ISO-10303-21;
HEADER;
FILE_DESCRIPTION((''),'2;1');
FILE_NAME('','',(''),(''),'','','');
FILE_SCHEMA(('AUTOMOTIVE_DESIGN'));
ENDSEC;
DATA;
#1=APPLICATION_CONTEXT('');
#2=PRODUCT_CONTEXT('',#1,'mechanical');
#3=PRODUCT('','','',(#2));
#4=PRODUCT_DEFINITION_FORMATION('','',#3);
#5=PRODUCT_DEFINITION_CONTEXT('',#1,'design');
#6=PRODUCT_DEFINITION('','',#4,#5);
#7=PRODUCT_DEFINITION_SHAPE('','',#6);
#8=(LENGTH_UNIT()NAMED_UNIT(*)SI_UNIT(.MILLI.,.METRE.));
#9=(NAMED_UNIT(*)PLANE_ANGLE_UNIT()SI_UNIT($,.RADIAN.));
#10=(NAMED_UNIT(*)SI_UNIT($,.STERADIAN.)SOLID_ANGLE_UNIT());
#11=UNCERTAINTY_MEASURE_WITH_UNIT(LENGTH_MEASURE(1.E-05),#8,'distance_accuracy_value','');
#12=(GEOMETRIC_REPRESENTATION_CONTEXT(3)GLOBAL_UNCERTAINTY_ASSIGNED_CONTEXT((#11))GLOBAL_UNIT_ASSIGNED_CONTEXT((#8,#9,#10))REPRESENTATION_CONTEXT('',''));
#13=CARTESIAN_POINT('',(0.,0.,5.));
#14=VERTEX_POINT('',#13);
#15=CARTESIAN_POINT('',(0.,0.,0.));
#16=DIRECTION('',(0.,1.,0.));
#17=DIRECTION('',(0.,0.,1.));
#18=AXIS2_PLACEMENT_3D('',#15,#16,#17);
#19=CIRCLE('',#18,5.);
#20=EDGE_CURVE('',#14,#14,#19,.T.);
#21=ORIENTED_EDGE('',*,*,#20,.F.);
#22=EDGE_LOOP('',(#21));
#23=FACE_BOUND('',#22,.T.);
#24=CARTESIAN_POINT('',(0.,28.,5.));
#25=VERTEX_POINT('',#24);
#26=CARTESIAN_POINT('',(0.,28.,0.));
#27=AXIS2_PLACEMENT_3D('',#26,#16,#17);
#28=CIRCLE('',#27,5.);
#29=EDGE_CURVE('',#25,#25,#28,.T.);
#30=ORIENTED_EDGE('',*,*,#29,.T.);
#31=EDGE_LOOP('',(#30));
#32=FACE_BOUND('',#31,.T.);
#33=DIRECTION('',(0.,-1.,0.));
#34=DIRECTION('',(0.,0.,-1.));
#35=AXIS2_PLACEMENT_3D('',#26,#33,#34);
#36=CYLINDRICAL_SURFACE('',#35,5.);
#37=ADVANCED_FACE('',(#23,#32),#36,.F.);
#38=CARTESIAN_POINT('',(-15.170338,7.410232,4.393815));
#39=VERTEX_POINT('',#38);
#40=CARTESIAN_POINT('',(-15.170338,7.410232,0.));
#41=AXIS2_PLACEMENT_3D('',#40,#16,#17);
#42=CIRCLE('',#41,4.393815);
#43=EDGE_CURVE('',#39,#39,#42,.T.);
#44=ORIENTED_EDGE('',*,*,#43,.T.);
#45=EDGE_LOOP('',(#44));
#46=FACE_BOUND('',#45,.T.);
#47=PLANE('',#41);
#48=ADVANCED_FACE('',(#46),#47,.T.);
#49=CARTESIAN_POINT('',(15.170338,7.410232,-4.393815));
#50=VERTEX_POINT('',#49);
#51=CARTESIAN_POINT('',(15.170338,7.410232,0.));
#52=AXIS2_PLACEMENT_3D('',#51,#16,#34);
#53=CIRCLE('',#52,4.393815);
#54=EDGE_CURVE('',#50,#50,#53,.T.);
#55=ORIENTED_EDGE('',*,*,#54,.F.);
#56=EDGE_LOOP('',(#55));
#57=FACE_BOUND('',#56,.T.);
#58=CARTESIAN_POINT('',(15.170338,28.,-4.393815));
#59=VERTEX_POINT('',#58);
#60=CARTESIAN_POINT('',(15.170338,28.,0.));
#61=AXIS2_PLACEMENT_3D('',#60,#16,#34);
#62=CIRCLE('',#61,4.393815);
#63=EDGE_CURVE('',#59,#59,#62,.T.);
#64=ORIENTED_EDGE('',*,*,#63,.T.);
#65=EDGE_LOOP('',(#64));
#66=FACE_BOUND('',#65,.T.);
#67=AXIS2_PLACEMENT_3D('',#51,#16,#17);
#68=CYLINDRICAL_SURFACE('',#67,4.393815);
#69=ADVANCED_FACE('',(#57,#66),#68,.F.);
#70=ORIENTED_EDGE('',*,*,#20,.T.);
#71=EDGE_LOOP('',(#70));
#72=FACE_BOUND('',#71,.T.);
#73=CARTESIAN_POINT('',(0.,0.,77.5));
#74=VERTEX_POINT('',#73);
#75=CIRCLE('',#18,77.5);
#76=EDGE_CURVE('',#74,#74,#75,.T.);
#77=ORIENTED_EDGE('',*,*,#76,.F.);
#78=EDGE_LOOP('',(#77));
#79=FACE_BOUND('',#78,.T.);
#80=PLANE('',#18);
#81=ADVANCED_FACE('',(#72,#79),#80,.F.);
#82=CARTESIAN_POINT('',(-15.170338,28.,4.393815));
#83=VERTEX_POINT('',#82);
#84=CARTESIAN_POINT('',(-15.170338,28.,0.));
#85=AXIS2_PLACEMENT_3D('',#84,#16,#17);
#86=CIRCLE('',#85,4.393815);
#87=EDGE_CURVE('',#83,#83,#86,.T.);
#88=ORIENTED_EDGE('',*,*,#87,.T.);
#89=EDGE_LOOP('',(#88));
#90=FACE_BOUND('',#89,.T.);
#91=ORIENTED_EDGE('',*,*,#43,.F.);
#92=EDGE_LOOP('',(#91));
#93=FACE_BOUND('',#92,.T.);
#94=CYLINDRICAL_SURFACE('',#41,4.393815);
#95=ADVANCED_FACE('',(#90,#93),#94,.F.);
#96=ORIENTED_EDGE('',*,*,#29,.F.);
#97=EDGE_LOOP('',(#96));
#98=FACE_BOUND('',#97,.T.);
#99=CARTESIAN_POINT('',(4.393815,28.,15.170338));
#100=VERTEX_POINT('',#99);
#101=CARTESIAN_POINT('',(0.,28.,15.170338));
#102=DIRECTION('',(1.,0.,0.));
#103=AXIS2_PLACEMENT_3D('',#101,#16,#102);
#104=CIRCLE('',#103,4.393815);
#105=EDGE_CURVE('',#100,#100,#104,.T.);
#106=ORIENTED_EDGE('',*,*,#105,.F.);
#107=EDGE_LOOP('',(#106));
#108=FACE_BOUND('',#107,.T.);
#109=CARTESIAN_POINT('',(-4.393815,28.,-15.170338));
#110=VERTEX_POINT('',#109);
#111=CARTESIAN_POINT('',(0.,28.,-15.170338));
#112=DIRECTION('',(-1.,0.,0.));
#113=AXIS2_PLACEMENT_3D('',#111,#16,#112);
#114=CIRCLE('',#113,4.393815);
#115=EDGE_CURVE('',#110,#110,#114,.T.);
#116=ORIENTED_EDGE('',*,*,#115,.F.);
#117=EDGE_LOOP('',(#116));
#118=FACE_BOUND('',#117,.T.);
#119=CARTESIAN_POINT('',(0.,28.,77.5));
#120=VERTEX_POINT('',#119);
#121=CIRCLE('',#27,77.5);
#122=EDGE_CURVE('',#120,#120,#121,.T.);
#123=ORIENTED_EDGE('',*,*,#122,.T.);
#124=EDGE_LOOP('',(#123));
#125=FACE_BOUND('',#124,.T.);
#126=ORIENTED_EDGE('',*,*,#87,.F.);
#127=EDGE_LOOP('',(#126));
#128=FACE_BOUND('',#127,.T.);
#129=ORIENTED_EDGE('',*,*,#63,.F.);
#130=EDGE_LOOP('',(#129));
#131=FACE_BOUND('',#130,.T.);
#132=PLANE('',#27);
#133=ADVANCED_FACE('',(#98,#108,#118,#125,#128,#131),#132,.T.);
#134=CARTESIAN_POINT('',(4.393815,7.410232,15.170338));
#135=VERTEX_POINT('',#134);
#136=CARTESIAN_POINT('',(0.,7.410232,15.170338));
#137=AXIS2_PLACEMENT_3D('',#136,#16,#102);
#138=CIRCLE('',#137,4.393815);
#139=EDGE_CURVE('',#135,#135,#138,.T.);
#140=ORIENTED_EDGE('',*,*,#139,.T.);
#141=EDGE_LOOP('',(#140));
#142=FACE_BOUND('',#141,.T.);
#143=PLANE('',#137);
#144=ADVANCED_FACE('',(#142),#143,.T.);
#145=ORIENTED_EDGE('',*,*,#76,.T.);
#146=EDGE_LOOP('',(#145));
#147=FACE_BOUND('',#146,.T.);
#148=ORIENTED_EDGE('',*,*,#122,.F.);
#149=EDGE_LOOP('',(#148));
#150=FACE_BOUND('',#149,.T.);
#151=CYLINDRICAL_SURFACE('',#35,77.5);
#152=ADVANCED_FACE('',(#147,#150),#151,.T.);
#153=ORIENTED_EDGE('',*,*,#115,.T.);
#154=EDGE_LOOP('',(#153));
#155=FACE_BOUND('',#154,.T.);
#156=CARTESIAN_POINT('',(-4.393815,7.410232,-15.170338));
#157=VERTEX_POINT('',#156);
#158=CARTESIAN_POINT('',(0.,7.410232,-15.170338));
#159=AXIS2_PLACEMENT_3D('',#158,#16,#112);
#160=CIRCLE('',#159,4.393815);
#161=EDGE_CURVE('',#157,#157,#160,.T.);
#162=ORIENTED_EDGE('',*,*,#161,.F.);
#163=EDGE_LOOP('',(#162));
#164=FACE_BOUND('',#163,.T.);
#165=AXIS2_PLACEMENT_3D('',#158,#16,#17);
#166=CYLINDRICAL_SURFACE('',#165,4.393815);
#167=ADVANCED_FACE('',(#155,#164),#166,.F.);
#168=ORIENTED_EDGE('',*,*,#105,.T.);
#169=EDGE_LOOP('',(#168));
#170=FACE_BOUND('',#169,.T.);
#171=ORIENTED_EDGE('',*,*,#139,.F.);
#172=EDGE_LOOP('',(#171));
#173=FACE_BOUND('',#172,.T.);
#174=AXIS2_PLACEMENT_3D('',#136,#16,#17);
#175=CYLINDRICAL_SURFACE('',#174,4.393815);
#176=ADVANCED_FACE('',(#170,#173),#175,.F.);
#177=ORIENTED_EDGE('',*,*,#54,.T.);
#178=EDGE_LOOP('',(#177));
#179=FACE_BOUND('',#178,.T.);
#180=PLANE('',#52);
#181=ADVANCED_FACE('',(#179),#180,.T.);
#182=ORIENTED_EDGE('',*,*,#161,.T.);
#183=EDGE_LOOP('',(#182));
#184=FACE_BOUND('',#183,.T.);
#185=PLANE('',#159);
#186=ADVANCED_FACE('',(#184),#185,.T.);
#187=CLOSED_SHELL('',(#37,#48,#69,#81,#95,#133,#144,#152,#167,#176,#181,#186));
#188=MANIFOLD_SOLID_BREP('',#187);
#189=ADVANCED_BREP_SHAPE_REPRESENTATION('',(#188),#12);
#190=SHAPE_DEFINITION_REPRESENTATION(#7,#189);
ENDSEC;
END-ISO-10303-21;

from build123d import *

# Parameters (mm, degrees)
SKETCH1_R           = 77.5
BOSS_EXTRUDE1_DEPTH = 28
SKETCH2_R           = 5
CUT_EXTRUDE1_DEPTH  = 114.121615971
SKETCH3_R           = 4.393814525
CUT_EXTRUDE2_DEPTH  = 20.589767576
CIRPATTERN1_COUNT   = 4


with BuildPart() as part:
    # Sketch1 → Boss-Extrude1 (new body)
    with BuildSketch(Plane(origin=(0, 0, 0), x_dir=(1, 0, 0), z_dir=(0, 1, 0))):
        Circle(SKETCH1_R)
    extrude(amount=BOSS_EXTRUDE1_DEPTH)

    # Sketch2 → Cut-Extrude1 (cut, through all)
    with BuildSketch(Plane(origin=(0, 0, 0), x_dir=(1, 0, 0), z_dir=(0, 1, 0))):
        Circle(SKETCH2_R)
    extrude(amount=CUT_EXTRUDE1_DEPTH, mode=Mode.SUBTRACT)

    # Sketch3 → Cut-Extrude2 (cut)
    with BuildSketch(Plane(origin=(0, 28, 0), x_dir=(1, 0, 0), z_dir=(0, 1, 0))):
        with Locations((-15.170338167, 0)):
            Circle(SKETCH3_R)
    cut_extrude2 = extrude(amount=-CUT_EXTRUDE2_DEPTH, mode=Mode.SUBTRACT)

    # CirPattern1: Cut-Extrude2 ×4 about axis
    cirpattern1_axis = Axis((0, 0, 0), (0, 1, 0))
    for i in range(1, CIRPATTERN1_COUNT):
        add(cut_extrude2.rotate(cirpattern1_axis, i * 360 / CIRPATTERN1_COUNT), mode=Mode.SUBTRACT)


solid = part.part
